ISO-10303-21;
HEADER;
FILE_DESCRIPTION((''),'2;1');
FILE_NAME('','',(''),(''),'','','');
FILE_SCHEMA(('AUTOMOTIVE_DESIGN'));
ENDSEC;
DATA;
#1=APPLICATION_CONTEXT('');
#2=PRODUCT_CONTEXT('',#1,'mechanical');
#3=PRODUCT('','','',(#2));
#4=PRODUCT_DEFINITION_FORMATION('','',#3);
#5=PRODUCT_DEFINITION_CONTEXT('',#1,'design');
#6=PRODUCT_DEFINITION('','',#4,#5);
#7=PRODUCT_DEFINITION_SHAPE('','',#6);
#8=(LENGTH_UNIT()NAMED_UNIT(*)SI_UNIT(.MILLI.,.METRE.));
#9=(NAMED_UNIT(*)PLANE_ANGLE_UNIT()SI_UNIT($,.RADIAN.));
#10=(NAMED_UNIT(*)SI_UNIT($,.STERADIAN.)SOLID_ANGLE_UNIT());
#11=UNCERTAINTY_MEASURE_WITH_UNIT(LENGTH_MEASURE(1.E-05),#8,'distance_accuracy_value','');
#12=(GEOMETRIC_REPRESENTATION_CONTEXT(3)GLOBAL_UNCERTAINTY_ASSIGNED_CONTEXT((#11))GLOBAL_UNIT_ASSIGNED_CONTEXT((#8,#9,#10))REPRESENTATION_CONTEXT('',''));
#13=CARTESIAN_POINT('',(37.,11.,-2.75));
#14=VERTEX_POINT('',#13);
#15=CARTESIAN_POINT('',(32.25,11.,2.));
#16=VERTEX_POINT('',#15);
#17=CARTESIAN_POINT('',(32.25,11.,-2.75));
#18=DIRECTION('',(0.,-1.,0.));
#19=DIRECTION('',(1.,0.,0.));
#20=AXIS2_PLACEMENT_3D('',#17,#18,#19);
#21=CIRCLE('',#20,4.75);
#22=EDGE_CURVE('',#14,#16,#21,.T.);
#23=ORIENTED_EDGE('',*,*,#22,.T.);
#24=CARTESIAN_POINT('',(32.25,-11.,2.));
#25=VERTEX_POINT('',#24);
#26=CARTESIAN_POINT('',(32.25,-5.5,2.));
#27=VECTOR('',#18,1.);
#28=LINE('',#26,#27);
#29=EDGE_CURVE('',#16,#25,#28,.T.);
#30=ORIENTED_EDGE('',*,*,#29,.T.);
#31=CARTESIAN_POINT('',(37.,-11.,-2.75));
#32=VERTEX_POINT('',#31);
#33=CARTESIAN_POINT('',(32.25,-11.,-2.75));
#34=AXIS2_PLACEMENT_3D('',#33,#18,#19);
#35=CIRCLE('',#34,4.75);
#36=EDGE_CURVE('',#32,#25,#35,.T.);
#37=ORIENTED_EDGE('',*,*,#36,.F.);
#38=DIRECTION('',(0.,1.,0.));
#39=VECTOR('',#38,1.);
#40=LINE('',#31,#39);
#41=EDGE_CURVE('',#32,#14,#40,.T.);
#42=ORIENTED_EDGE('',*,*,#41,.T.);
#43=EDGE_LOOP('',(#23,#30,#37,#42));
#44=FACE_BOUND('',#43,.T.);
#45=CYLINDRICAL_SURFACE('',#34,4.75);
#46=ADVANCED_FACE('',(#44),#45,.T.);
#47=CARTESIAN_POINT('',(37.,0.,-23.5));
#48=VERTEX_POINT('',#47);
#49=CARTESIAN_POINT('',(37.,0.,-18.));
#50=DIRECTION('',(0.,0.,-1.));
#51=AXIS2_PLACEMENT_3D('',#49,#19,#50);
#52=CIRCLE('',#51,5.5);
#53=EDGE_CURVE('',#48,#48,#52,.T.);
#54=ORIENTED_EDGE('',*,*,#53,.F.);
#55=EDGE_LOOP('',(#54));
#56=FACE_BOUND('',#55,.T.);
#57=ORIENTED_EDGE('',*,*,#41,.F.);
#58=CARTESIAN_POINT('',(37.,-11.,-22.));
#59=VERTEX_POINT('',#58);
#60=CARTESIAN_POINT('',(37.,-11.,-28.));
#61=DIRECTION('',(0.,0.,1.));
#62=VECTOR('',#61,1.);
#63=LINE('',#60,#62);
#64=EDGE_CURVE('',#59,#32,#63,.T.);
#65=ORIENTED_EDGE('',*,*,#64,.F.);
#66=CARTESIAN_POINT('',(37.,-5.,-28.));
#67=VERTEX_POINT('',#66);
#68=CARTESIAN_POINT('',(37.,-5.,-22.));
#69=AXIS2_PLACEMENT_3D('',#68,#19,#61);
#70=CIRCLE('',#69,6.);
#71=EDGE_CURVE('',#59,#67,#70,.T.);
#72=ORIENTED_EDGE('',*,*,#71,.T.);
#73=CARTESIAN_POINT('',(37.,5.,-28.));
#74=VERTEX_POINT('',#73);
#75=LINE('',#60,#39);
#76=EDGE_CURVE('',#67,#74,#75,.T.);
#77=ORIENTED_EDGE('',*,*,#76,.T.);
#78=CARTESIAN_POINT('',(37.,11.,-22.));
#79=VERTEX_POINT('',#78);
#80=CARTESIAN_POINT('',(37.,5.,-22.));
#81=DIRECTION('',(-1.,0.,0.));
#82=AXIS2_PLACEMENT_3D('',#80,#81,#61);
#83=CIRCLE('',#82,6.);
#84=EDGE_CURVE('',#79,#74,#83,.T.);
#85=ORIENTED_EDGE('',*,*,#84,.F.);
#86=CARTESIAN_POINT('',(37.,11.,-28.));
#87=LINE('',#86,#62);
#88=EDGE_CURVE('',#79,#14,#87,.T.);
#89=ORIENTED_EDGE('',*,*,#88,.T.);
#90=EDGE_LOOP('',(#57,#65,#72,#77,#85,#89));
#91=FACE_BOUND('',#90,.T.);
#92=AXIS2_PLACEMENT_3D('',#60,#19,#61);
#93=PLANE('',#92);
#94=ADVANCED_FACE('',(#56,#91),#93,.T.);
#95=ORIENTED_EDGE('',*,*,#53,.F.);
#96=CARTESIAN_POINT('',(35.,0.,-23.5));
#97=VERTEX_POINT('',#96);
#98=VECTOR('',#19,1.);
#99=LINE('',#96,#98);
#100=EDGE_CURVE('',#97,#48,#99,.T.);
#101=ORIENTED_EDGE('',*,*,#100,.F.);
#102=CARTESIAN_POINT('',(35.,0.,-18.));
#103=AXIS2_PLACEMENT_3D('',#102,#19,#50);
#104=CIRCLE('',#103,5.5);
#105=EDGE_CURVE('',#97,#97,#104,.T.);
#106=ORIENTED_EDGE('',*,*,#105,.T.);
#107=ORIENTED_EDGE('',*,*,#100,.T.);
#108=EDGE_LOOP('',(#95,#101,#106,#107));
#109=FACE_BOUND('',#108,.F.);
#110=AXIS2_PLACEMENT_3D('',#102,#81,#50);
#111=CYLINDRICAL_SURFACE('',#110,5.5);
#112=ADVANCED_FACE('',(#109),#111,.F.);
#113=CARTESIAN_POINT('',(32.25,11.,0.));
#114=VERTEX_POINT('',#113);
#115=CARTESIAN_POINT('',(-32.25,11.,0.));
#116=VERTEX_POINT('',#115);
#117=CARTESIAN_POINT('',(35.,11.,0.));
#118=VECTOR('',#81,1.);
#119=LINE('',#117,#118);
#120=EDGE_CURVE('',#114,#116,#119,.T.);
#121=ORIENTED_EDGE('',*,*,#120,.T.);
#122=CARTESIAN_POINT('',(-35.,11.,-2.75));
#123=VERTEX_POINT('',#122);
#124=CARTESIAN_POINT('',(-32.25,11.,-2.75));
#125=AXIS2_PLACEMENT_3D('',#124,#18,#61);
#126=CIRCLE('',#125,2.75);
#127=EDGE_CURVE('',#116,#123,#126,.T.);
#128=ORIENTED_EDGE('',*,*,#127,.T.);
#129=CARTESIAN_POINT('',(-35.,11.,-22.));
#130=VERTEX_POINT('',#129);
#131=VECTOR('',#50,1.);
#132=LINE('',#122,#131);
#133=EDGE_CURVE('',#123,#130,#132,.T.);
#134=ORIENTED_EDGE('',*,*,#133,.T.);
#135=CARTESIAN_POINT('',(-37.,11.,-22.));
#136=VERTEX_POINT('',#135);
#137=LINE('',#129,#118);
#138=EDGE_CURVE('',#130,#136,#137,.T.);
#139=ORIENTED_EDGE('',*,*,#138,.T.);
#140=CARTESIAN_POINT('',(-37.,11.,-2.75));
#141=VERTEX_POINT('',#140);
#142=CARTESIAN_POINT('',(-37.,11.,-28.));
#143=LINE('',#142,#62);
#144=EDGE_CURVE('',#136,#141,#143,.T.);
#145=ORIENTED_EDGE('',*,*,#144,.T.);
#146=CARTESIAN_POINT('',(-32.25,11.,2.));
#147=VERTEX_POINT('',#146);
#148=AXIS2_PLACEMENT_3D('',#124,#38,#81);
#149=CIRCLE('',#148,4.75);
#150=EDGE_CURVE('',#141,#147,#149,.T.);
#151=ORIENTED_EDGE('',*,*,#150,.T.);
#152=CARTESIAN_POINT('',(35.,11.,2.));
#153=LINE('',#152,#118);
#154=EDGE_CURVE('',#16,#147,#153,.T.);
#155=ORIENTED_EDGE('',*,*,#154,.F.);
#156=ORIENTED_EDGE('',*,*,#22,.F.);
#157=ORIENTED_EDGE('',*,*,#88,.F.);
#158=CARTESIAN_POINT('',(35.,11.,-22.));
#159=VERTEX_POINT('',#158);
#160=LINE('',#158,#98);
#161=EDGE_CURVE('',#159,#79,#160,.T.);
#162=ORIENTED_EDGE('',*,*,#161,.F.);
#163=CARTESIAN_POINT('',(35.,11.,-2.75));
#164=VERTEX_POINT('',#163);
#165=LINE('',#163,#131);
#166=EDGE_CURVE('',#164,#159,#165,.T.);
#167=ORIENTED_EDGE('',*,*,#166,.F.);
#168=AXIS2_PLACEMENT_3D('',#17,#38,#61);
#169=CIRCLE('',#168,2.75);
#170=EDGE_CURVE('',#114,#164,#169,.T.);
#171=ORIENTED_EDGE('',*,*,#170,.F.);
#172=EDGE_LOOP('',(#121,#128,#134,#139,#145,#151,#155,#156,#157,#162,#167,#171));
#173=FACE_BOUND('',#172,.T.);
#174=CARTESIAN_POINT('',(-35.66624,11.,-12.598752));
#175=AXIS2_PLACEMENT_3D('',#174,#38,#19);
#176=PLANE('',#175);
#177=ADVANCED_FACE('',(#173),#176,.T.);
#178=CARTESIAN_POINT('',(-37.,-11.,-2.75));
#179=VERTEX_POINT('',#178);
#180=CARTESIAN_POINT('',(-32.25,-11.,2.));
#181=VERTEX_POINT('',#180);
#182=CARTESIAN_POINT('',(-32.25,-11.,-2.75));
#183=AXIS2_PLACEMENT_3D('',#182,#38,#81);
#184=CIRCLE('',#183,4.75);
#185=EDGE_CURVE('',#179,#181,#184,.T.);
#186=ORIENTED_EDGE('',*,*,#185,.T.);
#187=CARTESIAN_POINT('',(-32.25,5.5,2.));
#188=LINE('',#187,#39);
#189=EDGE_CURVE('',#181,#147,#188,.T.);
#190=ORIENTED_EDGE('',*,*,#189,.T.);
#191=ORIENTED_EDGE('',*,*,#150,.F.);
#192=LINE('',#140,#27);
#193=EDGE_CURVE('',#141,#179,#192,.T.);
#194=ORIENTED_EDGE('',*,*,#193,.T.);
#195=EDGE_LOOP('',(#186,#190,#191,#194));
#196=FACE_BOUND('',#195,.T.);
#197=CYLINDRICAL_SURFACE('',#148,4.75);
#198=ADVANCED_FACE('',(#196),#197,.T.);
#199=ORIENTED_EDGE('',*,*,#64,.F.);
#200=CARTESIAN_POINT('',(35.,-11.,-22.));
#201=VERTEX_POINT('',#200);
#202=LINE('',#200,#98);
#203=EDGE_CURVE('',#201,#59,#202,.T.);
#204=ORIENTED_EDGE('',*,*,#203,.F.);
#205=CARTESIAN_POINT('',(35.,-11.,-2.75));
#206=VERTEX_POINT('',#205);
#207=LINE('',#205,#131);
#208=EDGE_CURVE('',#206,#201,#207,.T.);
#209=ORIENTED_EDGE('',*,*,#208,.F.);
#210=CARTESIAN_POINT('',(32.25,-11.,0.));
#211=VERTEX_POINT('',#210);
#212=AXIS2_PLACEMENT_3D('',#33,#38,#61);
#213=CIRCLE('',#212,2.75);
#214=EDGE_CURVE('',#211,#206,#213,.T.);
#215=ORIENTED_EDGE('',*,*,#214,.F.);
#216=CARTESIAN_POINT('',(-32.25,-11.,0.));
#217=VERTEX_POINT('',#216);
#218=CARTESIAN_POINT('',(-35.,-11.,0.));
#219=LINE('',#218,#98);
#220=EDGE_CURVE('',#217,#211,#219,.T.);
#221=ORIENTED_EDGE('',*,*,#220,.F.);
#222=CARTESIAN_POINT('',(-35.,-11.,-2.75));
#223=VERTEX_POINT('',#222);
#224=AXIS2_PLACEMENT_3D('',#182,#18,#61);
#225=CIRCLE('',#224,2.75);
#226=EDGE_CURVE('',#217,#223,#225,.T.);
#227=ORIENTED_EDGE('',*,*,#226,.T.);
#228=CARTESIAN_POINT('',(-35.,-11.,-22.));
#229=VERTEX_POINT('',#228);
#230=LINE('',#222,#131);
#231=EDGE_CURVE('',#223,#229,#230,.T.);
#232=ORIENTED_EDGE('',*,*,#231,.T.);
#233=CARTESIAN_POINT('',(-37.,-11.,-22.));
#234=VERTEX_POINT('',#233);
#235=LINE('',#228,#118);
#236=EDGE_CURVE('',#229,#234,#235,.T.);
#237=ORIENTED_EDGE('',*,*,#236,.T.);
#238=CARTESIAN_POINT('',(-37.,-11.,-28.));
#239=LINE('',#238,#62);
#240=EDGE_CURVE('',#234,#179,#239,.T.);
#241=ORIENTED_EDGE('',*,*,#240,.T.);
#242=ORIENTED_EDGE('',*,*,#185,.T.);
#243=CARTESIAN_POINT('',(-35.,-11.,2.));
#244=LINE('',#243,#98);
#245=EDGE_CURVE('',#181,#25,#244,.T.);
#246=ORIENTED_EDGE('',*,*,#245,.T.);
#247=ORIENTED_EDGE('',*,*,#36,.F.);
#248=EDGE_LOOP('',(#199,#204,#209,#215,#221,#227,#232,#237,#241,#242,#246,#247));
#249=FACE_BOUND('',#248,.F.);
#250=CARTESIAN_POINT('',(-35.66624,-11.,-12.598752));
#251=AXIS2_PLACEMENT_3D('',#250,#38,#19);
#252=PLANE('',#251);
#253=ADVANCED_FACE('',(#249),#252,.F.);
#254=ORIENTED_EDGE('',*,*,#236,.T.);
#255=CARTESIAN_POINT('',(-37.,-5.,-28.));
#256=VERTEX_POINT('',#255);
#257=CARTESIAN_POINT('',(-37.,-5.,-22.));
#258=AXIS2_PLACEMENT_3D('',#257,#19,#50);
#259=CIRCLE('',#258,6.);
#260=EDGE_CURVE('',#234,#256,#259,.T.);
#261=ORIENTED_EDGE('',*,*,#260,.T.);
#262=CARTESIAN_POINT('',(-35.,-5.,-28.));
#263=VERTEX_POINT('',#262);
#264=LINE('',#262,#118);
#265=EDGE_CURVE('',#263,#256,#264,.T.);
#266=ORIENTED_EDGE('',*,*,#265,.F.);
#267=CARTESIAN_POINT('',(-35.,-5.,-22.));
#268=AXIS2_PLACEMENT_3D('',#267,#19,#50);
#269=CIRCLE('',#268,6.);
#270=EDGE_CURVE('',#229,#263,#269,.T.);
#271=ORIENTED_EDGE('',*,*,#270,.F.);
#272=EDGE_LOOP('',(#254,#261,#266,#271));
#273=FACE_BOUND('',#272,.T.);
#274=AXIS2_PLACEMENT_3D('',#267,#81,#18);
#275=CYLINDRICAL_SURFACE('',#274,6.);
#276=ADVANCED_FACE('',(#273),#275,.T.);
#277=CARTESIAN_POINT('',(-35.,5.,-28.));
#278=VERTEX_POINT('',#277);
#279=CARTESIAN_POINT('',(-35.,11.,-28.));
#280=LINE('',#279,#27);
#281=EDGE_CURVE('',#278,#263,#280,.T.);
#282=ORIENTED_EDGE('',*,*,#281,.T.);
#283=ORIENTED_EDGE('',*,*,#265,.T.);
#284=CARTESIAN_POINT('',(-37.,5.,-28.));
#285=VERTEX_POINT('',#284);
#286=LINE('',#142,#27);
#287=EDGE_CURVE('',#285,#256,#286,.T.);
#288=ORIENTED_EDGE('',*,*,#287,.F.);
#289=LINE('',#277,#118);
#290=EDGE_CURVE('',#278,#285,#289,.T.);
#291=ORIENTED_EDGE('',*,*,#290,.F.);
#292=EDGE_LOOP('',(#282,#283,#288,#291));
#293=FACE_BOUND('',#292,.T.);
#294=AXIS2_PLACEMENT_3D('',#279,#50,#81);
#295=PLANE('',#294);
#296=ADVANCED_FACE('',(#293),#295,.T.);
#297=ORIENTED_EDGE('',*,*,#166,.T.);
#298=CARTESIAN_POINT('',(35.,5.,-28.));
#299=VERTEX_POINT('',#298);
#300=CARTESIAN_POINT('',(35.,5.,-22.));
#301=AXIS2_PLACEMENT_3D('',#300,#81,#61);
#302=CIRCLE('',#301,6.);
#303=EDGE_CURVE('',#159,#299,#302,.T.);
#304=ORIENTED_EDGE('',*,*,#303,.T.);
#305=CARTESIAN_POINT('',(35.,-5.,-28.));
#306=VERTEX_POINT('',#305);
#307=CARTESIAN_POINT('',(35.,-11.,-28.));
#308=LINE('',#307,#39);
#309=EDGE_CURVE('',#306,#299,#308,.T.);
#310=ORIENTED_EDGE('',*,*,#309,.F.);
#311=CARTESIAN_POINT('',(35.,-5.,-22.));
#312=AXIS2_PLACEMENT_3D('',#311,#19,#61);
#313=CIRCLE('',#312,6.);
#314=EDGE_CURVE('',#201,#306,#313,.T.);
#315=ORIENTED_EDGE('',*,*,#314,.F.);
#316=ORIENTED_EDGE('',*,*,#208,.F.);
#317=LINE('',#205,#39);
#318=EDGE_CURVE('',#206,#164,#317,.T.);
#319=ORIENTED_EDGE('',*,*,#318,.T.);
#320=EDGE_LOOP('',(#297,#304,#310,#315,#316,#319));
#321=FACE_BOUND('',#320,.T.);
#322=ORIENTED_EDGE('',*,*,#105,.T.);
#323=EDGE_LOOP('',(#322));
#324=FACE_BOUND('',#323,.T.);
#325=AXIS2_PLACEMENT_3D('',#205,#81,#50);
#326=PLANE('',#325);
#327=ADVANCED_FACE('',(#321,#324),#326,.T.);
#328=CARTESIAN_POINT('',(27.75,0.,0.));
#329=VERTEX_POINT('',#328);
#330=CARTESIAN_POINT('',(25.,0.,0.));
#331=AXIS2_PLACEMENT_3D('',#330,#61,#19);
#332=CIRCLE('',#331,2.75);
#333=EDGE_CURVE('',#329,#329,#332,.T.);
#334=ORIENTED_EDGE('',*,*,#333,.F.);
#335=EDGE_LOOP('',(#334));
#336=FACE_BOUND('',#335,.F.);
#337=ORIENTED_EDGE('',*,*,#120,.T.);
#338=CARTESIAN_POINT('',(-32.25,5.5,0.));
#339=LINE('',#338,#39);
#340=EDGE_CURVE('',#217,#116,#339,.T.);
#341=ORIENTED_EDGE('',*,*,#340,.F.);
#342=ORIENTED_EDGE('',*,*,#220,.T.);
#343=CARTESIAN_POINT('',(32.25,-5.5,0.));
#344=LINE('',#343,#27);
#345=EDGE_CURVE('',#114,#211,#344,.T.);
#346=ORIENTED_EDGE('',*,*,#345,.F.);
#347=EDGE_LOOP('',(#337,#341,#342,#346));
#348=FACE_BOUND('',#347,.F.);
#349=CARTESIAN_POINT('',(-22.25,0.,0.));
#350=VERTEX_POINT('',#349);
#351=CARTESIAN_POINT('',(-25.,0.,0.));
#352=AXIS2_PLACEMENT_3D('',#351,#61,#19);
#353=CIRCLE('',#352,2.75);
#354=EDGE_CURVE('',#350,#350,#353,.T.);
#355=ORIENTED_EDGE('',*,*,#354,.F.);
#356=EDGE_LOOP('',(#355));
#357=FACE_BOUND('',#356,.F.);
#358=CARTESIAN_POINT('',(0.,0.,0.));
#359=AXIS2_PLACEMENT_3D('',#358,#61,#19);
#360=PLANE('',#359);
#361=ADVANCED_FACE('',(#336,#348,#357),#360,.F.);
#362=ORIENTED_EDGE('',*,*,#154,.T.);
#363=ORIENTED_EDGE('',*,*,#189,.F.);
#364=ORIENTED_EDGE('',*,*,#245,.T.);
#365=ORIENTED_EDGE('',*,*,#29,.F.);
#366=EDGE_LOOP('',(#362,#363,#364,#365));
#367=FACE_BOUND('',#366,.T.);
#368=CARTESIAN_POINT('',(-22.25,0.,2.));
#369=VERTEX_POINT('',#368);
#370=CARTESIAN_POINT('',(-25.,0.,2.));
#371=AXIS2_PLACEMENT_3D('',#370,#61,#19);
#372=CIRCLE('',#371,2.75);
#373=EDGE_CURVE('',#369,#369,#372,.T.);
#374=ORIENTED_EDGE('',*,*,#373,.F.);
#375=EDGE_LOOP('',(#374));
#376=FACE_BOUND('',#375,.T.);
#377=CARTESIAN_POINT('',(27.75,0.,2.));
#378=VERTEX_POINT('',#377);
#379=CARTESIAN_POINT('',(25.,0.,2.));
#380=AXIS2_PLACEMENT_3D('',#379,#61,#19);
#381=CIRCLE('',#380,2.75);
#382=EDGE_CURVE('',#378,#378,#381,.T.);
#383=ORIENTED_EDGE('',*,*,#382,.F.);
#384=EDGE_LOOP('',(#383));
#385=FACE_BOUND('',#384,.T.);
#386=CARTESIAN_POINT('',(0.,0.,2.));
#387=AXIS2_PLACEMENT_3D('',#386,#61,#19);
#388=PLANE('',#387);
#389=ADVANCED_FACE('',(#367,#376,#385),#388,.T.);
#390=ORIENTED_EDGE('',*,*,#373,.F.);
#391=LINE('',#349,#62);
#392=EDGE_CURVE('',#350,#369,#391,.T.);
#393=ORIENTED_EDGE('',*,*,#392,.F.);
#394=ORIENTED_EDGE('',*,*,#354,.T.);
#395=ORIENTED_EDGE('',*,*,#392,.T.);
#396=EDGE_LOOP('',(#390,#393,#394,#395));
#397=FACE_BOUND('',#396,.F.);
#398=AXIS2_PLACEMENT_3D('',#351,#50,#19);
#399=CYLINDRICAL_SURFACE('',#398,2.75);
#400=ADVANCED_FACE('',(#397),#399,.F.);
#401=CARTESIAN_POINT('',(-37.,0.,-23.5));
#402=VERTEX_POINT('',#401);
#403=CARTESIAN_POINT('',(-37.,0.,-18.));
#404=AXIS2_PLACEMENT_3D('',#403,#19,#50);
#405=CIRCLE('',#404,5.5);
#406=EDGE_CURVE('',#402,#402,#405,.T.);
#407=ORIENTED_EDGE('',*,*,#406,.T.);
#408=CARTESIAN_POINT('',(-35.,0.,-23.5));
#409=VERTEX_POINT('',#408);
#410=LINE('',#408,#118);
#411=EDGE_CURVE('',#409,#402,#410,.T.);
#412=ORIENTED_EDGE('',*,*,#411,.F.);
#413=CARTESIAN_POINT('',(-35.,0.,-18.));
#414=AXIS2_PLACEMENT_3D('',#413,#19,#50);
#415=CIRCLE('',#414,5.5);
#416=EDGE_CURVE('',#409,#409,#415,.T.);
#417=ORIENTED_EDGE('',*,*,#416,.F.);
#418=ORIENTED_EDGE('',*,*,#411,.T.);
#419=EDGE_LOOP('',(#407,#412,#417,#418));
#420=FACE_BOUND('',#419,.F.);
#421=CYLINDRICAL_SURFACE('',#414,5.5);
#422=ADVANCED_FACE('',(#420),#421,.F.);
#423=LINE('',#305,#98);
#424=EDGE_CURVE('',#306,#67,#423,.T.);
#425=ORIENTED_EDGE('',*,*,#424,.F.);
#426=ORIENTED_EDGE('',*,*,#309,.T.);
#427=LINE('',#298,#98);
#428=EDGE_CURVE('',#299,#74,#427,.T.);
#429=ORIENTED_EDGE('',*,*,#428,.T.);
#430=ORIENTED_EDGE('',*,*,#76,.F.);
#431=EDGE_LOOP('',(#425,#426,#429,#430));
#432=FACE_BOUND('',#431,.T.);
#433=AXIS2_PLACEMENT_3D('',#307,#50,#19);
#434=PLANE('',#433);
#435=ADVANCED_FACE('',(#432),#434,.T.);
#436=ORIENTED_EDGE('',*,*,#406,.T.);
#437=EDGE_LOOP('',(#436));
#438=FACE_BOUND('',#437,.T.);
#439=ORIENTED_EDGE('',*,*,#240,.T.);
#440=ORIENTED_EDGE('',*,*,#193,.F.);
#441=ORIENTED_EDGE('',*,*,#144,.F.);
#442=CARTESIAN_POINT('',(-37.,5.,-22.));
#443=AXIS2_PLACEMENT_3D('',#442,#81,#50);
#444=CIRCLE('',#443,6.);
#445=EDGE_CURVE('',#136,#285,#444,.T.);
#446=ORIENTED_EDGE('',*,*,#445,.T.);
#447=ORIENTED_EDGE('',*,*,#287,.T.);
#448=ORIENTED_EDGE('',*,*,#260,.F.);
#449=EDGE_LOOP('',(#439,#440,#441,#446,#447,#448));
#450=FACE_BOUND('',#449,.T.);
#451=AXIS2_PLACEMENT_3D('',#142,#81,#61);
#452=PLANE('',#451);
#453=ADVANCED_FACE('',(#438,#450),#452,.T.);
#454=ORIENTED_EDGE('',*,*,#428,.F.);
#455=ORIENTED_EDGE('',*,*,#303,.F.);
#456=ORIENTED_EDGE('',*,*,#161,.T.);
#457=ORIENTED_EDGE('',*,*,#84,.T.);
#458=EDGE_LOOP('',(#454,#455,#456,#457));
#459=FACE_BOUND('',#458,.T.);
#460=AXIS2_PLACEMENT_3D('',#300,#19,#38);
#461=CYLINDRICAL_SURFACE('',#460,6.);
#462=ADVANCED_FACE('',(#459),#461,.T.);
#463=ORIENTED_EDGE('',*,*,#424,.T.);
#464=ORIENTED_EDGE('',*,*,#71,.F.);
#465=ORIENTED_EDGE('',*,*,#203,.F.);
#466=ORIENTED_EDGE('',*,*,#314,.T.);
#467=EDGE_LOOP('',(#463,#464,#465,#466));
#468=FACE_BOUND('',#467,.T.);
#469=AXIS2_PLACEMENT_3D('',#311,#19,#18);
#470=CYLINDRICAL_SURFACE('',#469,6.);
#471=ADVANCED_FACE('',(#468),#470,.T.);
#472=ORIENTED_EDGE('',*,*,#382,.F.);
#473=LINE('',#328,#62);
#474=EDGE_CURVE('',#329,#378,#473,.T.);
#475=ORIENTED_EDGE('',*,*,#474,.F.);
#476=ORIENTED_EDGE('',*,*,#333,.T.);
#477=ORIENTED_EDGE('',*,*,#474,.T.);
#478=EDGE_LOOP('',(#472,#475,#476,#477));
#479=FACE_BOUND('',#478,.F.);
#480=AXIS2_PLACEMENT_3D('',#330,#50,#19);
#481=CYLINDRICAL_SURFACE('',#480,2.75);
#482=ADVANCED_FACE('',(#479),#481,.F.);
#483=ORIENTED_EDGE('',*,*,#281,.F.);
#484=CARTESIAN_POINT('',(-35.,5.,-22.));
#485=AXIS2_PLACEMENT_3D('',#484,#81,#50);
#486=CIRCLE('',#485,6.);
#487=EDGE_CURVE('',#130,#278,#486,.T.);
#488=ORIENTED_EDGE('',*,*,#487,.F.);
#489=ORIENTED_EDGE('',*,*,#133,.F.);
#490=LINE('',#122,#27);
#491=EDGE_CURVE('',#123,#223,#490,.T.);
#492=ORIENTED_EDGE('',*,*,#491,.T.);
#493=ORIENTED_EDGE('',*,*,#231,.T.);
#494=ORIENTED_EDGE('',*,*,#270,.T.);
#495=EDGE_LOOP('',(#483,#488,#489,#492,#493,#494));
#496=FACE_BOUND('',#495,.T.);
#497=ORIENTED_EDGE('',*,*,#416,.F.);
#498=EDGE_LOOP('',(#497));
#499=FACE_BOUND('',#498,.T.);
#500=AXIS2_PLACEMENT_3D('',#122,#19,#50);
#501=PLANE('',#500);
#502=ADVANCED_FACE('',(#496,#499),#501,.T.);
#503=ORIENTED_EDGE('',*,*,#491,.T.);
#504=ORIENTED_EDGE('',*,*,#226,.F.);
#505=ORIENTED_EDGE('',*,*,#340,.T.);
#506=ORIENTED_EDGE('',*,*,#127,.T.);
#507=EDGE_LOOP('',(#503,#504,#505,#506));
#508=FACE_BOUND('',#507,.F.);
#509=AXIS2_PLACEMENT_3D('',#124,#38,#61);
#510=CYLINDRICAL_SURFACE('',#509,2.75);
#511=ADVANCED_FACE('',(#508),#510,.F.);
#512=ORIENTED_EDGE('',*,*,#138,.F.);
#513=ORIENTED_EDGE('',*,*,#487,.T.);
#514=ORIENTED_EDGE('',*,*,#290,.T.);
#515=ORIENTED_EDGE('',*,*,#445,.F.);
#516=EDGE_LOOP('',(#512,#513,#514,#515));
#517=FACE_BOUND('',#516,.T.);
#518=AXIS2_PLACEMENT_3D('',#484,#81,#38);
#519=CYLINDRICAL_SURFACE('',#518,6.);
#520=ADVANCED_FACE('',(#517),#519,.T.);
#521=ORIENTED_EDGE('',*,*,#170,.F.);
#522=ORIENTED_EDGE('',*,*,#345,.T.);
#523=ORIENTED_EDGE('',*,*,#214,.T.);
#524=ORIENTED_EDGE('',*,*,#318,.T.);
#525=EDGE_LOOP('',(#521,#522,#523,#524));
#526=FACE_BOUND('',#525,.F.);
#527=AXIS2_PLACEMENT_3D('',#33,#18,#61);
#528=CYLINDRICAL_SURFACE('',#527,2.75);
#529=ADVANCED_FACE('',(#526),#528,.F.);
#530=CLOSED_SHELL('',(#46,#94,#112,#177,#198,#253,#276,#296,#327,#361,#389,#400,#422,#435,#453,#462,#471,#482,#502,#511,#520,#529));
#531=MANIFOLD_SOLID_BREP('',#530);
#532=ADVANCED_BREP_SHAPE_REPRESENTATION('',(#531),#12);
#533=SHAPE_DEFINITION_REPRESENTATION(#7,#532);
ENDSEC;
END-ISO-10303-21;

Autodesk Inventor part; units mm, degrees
ref_plane "YZ Plane" through (0, 0, 0) normal (1, 0, 0) x (0, 1, 0)
ref_plane "XZ Plane" through (0, 0, 0) normal (0, 1, 0) x (-1, 0, 0)
ref_plane "XY Plane" through (0, 0, 0) normal (0, 0, 1) x (1, 0, 0)
sketch "Sketch1" plane through (0, 0, 0) normal (0, 0, 1) x (1, 0, 0)
  line L0 (-35, -11) -> (35, -11)
  line L1 (35, -11) -> (35, 11)
  line L2 (35, 11) -> (-35, 11)
  line L3 (-35, 11) -> (-35, -11)
  line L4 (-35, -11) -> (35, 11) construction
  line L5 (35, -11) -> (-35, 11) construction
  circle A0 centre (-25, 0) radius 2.75
  circle A1 centre (25, 0) radius 2.75
  line L6 (0, 11) -> (0, -18.7198) construction
  point P0 (0, 0)
  dimension "d154" = 70
  dimension "d155" = 22
  dimension "d197" = 50
  dimension "d198" = 5.5
extrude "Plate5" add sketch "Sketch1" along normal blind 2
sketch "Sketch10" plane through (-37, 11, 2) normal (1, 0, 0) x (0, 1, 0)
  line L0 (-22, 0) -> (0, 0)
  line L1 (0, 0) -> (0, -30)
  line L2 (0, -30) -> (-22, -30)
  line L3 (-22, -30) -> (-22, 0)
edge flange "Flange4" height 30 angle 90 thickness 2 bend radius 2.75 thickness toward (1, 0, 0) relief round relief width 2 relief depth 1 corner gap 2.75 corner form 0 edges at (-35, 0, 0) (35, 0, 0) wall of the first edge with corners at (-37, -11, 2) (-37, 11, 2) (-37, 11, -28) (-37, -11, -28)
bend "Bend4"
corner "Corner4"
sketch "Sketch11" plane through (-35, -11, -28) normal (1, 0, 0) x (0, 0, -1)
  line L0 (-25.25, 22) -> (-25.25, 0) construction
  line L1 (-25.25, 0) -> (0, 0) construction
  line L2 (0, 0) -> (0, 22) construction
  line L3 (-25.25, 22) -> (0, 22) construction
  circle A0 centre (-10, 11) radius 5.5
  point P0 (-28, 11)
  point P1 (0, 11)
  dimension "d192" = 11
  dimension "d193" = 10
extrude "Cut3" cut sketch "Sketch11" against normal blind 2
mirror "Mirror1" about plane through (0, 0, 0) normal (1, 0, 0) of "Cut3"
fillet "Corner Round3" radius 6 4 edges at (-36, 11, -28) (-36, -11, -28) (36, -11, -28) (36, 11, -28)
properties part number "TKS 3525 FDS diam support" material "Stainless Steel"
